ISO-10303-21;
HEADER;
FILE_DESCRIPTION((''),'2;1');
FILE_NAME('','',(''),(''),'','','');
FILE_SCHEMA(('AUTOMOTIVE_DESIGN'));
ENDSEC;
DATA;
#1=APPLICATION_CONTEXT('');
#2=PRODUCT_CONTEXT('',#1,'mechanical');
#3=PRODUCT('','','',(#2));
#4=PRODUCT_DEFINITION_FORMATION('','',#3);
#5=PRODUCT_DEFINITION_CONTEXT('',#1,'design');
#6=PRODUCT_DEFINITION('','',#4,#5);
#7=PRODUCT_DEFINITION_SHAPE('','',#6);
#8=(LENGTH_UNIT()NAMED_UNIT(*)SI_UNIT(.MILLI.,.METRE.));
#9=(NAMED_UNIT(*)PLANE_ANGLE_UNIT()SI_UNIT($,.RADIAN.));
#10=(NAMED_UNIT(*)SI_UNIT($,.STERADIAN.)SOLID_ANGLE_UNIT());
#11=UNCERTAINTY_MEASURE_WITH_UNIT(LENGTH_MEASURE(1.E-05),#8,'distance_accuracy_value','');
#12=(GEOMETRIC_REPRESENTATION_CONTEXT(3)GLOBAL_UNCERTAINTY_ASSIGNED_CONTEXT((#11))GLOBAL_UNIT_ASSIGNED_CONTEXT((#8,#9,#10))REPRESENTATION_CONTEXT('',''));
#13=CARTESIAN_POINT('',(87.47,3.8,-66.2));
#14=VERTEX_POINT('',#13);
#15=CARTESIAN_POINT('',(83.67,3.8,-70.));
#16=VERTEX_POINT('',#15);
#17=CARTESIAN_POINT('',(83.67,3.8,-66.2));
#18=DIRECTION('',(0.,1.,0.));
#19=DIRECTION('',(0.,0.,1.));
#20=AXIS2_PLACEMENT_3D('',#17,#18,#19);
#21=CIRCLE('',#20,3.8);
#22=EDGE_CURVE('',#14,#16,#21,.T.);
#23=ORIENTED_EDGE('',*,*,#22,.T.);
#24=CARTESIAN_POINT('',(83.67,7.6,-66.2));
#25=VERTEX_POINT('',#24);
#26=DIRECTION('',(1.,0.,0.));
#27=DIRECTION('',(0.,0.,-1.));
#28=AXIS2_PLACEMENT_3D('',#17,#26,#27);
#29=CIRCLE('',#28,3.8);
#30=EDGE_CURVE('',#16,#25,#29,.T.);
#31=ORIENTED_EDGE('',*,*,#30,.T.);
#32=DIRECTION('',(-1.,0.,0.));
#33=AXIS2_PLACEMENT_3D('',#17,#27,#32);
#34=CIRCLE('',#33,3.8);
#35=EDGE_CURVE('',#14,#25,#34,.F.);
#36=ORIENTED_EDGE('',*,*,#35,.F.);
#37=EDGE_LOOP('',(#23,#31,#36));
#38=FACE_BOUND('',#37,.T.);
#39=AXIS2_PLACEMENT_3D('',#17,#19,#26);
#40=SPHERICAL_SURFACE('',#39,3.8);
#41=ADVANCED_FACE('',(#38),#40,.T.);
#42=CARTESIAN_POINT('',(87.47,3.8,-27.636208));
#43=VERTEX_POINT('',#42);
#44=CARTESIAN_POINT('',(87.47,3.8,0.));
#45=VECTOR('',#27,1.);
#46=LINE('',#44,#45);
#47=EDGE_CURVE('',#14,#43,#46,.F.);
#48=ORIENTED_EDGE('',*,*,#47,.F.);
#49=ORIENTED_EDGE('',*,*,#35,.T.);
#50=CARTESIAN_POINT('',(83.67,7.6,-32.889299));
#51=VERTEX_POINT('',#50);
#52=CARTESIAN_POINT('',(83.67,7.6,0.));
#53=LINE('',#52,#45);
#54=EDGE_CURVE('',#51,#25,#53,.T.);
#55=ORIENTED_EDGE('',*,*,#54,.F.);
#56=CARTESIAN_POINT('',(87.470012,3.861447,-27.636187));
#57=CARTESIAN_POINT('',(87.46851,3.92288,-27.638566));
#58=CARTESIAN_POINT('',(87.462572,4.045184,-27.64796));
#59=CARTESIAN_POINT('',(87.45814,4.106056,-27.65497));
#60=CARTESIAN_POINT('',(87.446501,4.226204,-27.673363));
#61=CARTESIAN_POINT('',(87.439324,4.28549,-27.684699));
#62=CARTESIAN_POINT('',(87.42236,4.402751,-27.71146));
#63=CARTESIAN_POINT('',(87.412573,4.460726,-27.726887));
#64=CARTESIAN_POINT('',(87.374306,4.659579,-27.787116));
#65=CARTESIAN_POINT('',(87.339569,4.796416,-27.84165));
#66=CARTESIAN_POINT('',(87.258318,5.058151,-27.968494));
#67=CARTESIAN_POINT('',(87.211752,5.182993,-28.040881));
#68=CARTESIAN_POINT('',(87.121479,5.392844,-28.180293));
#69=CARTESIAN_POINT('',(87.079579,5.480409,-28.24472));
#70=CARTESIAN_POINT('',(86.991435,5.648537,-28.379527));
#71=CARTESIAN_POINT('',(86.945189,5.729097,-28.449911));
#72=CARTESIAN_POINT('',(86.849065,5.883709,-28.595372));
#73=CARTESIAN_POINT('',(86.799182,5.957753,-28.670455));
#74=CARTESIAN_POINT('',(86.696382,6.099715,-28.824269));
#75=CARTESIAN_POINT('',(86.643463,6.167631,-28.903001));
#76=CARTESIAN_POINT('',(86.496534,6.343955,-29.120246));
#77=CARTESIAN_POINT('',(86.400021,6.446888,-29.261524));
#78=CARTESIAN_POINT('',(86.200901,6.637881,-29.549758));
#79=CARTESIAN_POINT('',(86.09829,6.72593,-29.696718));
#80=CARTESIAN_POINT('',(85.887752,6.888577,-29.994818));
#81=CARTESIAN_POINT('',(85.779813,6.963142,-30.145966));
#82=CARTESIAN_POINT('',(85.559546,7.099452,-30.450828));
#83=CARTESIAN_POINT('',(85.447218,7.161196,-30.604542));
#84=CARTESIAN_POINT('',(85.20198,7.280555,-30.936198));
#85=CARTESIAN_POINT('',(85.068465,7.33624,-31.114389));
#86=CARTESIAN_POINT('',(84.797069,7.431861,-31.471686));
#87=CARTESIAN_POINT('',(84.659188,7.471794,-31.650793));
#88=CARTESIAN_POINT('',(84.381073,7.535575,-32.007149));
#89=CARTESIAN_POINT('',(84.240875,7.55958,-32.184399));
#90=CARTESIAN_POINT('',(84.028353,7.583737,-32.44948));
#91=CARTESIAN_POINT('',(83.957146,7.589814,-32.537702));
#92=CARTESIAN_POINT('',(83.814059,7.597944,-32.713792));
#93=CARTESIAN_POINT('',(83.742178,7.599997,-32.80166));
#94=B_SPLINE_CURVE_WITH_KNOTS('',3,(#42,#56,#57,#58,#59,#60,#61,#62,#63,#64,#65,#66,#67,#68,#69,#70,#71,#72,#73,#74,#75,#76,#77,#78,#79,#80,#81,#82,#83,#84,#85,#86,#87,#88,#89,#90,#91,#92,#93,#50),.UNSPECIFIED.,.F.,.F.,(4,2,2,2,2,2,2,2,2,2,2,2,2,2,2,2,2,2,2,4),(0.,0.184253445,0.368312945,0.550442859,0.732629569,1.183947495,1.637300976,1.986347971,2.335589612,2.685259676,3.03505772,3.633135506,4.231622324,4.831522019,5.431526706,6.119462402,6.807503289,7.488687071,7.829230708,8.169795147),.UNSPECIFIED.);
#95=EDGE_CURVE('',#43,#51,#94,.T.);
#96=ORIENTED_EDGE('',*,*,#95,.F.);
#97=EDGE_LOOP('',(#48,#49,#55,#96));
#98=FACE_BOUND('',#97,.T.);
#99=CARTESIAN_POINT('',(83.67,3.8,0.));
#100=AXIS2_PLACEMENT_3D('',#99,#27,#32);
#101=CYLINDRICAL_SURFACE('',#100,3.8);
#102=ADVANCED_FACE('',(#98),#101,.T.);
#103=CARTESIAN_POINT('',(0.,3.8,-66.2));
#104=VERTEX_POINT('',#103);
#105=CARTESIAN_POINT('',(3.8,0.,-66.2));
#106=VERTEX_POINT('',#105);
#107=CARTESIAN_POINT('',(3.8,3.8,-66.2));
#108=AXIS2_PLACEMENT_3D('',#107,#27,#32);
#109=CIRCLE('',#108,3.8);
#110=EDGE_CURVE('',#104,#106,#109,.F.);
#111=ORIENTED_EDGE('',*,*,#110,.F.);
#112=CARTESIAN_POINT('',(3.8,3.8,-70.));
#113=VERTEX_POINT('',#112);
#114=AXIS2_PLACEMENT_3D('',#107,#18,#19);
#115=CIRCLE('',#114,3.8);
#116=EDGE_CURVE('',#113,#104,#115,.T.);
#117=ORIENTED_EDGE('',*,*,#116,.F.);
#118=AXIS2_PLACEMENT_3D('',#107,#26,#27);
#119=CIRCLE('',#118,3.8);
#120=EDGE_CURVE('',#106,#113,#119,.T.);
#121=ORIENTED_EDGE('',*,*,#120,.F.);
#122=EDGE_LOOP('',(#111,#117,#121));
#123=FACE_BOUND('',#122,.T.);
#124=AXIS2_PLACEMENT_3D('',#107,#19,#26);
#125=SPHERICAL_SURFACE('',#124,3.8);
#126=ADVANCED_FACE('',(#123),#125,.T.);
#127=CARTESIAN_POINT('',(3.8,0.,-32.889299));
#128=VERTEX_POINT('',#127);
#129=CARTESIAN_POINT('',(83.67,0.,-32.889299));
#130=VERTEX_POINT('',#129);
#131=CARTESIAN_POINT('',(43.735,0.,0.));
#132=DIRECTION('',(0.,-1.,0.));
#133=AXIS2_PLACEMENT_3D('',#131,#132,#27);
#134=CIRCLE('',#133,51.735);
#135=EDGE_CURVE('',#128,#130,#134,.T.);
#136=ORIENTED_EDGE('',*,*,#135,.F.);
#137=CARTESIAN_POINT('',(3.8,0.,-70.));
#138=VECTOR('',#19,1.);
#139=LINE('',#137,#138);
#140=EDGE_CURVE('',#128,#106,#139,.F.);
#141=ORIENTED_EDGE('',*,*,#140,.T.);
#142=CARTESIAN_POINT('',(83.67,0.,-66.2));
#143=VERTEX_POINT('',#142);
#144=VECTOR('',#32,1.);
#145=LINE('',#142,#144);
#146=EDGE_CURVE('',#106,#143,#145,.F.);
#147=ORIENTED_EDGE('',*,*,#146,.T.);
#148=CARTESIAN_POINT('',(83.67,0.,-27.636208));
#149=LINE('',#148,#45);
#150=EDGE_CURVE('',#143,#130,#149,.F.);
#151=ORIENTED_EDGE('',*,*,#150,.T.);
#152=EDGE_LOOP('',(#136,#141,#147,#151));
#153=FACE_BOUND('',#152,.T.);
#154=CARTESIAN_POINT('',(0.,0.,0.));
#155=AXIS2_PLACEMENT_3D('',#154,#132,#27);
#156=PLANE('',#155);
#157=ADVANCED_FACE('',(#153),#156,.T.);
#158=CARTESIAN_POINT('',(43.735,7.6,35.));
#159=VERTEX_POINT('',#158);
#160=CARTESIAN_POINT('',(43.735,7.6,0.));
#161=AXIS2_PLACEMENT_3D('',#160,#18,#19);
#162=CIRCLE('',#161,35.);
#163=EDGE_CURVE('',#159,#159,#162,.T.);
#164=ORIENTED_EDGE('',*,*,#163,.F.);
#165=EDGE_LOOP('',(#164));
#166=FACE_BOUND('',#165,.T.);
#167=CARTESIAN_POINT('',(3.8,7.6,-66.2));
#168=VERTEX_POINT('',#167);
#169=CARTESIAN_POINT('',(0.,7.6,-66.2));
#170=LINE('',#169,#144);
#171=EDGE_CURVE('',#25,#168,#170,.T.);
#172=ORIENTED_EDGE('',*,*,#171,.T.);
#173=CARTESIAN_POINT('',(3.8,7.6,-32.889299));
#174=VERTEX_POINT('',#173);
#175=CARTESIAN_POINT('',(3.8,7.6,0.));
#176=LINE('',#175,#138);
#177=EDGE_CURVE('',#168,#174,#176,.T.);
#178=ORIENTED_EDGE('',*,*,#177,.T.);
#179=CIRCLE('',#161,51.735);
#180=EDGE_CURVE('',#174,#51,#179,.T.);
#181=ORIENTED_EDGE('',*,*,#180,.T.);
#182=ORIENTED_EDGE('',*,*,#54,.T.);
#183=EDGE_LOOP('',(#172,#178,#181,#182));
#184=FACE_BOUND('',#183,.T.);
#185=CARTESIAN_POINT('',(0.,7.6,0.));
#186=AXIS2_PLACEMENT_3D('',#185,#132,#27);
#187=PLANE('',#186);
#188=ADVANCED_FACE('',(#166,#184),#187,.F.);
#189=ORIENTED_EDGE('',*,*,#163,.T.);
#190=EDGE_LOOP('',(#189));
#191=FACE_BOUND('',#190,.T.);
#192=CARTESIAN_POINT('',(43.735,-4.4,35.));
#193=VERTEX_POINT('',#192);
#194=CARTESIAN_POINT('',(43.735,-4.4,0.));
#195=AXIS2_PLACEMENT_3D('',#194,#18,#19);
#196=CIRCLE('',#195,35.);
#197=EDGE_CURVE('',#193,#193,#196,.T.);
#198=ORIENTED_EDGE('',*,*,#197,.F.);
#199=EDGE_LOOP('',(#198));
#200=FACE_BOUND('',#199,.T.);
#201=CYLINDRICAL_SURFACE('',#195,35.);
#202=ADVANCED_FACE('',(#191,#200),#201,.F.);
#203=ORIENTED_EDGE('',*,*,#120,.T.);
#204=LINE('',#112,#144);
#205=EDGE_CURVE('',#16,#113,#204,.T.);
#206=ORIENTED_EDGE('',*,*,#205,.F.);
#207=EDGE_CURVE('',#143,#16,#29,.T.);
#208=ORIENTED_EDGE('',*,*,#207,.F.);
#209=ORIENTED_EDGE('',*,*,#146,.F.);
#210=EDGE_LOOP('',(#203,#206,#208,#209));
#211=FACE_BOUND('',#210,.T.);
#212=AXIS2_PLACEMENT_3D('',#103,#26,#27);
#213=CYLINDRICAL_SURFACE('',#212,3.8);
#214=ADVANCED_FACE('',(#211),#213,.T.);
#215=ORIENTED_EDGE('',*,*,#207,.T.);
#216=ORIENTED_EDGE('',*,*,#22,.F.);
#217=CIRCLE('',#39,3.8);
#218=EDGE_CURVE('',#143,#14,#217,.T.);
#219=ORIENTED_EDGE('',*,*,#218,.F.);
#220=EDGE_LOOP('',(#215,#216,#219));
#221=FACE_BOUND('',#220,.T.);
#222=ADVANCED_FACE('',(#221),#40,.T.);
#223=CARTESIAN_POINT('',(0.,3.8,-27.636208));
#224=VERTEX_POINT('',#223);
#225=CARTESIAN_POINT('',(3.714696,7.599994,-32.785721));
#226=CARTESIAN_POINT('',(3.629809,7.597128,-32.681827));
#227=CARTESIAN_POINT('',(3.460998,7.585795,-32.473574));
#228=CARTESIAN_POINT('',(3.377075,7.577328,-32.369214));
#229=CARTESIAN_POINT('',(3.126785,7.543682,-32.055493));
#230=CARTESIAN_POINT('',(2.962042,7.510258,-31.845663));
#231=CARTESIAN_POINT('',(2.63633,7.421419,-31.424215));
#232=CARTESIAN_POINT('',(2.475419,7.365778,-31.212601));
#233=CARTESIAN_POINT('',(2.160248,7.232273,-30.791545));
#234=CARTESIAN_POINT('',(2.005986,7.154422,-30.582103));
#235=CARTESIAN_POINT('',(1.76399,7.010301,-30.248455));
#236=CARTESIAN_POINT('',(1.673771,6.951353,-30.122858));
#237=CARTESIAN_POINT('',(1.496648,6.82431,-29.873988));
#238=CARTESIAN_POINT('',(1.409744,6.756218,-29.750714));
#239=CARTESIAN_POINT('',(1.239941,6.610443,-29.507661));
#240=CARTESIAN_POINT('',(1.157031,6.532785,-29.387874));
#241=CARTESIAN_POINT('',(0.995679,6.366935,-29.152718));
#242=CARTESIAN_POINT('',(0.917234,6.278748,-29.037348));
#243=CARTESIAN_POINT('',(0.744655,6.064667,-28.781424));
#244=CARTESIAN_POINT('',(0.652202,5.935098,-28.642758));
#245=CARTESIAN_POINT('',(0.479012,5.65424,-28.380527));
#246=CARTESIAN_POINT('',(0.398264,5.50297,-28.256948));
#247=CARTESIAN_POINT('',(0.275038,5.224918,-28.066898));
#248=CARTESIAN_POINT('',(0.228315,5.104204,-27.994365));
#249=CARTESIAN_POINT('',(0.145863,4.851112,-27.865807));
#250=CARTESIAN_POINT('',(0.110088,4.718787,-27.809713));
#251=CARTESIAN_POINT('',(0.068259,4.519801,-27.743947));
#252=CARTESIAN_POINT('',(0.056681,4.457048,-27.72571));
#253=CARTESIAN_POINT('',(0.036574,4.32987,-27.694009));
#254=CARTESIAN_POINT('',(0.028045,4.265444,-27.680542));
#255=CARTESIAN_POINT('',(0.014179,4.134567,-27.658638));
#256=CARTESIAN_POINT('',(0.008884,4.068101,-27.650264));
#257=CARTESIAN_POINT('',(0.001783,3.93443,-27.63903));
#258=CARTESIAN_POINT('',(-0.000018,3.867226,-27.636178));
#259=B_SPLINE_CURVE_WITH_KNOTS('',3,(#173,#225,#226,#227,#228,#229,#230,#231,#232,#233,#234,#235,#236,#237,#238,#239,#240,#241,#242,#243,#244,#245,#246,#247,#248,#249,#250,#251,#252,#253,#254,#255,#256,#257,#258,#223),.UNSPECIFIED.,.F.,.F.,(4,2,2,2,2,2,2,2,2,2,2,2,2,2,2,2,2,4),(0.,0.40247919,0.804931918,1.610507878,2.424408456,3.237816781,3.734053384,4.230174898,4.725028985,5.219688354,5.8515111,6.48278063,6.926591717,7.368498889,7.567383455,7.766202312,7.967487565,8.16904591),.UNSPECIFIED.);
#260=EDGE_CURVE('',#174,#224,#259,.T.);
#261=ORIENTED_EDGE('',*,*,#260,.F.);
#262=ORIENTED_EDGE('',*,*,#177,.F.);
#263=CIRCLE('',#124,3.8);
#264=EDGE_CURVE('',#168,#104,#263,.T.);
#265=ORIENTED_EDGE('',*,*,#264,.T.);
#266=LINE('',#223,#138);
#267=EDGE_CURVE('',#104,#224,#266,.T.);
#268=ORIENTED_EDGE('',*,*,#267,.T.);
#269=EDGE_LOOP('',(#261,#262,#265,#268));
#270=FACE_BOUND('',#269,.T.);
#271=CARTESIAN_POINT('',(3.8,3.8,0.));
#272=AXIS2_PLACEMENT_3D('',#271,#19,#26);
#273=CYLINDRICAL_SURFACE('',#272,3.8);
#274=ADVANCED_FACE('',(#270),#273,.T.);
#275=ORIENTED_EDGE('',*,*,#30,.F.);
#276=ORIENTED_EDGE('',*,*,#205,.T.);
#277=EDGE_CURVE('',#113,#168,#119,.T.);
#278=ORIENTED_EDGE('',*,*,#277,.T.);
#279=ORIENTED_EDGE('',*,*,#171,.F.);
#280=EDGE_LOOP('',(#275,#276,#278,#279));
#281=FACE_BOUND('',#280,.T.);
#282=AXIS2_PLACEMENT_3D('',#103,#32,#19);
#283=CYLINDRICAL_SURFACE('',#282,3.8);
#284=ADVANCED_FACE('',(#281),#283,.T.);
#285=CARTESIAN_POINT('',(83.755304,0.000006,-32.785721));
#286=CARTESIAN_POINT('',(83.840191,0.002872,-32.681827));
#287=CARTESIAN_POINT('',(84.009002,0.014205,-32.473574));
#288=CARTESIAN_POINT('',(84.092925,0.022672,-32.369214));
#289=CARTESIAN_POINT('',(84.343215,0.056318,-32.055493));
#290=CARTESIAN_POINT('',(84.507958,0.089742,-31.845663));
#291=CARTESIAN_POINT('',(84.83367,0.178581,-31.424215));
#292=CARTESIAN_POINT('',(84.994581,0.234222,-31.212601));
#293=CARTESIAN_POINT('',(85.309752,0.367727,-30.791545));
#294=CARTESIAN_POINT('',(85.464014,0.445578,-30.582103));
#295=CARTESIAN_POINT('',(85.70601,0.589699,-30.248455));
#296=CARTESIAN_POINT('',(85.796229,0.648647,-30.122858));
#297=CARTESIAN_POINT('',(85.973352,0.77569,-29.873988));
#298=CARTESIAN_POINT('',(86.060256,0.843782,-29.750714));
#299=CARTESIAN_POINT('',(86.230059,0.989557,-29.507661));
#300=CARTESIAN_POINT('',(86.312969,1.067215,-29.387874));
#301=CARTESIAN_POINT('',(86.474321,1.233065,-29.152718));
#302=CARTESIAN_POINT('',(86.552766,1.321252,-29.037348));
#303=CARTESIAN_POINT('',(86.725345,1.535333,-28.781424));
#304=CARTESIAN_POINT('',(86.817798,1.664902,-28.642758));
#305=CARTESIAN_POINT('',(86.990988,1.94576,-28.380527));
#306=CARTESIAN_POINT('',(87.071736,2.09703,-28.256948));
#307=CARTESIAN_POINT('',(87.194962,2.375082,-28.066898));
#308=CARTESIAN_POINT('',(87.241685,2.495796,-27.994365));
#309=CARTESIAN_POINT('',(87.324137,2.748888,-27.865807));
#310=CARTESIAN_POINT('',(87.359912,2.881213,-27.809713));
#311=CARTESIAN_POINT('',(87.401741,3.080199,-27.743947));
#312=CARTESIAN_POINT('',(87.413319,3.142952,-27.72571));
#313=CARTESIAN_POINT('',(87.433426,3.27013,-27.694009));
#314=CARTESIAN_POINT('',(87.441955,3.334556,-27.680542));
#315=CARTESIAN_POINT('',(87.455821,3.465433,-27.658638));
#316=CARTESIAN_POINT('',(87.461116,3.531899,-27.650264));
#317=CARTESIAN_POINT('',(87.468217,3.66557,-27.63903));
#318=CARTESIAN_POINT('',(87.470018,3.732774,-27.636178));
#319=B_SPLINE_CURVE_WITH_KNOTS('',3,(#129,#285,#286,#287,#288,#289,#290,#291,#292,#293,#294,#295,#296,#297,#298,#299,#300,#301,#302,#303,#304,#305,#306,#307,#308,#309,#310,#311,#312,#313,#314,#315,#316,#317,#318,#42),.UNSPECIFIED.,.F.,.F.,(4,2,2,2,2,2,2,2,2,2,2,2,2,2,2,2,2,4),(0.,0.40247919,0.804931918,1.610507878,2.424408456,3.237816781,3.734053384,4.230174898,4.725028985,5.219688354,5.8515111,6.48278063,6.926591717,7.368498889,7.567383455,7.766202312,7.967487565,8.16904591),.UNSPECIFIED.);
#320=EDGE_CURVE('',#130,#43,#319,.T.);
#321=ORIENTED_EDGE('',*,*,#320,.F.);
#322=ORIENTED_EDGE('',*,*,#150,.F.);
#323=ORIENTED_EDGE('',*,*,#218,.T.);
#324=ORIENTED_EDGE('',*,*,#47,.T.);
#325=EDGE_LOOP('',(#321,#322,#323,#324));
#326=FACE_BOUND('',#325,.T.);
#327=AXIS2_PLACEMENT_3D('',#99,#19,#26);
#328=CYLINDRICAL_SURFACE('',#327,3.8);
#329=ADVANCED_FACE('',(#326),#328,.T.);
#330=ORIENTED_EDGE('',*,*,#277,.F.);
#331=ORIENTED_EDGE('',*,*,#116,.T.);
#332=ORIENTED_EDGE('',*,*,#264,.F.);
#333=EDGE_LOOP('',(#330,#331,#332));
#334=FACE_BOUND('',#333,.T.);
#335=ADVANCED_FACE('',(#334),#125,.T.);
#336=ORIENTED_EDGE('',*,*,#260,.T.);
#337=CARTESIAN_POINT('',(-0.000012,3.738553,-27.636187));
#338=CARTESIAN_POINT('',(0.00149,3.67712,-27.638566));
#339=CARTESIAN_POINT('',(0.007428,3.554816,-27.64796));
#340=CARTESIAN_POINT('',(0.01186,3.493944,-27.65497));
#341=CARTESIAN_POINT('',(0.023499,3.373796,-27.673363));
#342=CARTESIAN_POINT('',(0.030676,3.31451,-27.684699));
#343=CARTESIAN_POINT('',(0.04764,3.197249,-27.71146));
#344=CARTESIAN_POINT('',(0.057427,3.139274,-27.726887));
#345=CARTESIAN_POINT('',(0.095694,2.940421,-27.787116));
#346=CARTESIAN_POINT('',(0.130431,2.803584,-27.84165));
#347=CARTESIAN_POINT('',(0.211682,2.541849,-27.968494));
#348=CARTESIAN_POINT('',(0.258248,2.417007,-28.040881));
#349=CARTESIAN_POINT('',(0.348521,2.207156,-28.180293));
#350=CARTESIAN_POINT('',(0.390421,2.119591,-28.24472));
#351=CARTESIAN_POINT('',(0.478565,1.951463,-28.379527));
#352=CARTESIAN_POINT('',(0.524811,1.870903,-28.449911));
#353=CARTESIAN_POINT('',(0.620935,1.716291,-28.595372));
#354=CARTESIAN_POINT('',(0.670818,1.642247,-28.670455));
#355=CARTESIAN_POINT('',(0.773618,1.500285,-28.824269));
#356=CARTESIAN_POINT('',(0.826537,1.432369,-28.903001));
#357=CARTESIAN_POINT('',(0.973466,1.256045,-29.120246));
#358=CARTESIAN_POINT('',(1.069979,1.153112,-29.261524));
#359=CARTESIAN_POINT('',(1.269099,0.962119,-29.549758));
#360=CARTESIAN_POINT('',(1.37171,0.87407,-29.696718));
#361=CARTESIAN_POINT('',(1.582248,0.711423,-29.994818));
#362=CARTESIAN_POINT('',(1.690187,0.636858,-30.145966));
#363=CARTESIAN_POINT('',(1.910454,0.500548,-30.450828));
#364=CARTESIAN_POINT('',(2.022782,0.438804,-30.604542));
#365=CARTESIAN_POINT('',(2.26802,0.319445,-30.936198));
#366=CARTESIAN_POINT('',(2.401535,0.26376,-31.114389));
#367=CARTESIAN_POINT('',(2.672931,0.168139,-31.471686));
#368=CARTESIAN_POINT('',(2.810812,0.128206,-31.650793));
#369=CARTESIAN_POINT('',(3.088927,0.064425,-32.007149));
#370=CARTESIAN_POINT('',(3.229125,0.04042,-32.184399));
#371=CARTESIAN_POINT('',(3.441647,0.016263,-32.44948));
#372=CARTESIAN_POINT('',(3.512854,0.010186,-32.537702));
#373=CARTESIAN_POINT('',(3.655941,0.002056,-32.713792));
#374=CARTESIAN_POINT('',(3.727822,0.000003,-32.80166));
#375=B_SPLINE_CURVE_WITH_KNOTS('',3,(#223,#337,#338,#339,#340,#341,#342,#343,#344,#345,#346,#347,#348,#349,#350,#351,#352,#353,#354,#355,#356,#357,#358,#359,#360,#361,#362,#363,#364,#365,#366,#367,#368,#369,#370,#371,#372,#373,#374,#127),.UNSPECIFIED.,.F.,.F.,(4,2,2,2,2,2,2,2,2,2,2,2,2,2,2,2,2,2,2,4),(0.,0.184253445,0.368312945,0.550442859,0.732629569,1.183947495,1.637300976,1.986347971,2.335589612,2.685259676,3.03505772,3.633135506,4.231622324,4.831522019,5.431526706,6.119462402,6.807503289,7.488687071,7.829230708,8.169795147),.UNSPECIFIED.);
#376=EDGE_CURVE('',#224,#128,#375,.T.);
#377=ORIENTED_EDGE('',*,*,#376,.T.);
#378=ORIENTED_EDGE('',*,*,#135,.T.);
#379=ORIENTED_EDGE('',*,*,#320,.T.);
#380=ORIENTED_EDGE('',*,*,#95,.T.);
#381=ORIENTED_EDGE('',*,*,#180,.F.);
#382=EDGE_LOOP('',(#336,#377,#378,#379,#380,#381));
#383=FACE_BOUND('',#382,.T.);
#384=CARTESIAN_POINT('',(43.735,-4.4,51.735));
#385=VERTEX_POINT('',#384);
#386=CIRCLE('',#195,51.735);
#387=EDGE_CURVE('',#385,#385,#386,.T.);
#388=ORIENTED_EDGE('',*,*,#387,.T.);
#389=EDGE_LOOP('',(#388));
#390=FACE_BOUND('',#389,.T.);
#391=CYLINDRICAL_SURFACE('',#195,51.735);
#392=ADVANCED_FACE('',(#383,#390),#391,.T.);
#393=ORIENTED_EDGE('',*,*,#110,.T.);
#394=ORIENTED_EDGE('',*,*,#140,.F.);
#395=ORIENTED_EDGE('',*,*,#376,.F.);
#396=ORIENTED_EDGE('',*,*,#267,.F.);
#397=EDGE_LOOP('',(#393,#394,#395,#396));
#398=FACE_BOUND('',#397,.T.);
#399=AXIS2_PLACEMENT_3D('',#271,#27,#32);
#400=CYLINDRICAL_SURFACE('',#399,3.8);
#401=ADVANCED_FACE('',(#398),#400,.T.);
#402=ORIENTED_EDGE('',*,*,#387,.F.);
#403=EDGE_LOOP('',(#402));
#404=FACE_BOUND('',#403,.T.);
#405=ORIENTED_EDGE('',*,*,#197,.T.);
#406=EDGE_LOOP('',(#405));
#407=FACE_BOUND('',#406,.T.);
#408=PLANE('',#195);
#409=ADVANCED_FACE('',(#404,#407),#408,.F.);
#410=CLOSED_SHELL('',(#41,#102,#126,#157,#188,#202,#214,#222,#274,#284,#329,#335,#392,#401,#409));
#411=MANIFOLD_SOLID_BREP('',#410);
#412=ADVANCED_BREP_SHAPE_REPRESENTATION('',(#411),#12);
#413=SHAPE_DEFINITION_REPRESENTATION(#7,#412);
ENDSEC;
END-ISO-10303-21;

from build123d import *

# Parameters (mm, degrees)
SKETCH1_W           = 87.47
SKETCH1_H           = 70
BOSS_EXTRUDE1_DEPTH = 7.6
SKETCH2_R           = 43.735
BOSS_EXTRUDE2_DEPTH = 12
SKETCH3_R           = 51.735
BOSS_EXTRUDE3_DEPTH = 12
SKETCH4_R           = 35
CUT_EXTRUDE1_DEPTH  = 12
FILLET1_R           = 3.8
FILLET2_R           = 3.8


with BuildPart() as part:
    # Sketch1 → Boss-Extrude1 (new body)
    with BuildSketch(Plane(origin=(0, 0, 0), x_dir=(1, 0, 0), z_dir=(0, 1, 0))):
        with Locations((43.735, 35)):
            Rectangle(SKETCH1_W, SKETCH1_H)
    extrude(amount=BOSS_EXTRUDE1_DEPTH)

    # Sketch2 → Boss-Extrude2 (add)
    with BuildSketch(Plane(origin=(0, 7.6, 0), x_dir=(1, 0, 0), z_dir=(0, 1, 0))):
        with Locations(Location((43.735, 0, 0), (0, 0, 270))):
            Circle(SKETCH2_R)
    extrude(amount=-BOSS_EXTRUDE2_DEPTH)

    # Sketch3 → Boss-Extrude3 (add)
    with BuildSketch(Plane(origin=(0, 7.6, 0), x_dir=(1, 0, 0), z_dir=(0, 1, 0))):
        with Locations(Location((43.735, 0, 0), (0, 0, 270))):
            Circle(SKETCH3_R)
    extrude(amount=-BOSS_EXTRUDE3_DEPTH)

    # Sketch4 → Cut-Extrude1 (cut)
    with BuildSketch(Plane(origin=(0, 7.6, 0), x_dir=(1, 0, 0), z_dir=(0, 1, 0))):
        with Locations(Location((43.735, 0, 0), (0, 0, 270))):
            Circle(SKETCH4_R)
    extrude(amount=-CUT_EXTRUDE1_DEPTH, mode=Mode.SUBTRACT)

    # Fillet1
    fillet1_edges = [part.edges().sort_by_distance(p)[0] for p in [
        (87.47, 0, -48.818104067),
        (87.47, 7.6, -48.818104067),
        (0, 7.6, -48.818104067),
        (0, 0, -48.818104067),
    ]]
    fillet(fillet1_edges, radius=FILLET1_R - 0.0001)  # a hair under: the kernel refuses the full size

    # Fillet2
    fillet2_edges = [part.edges().sort_by_distance(p)[0] for p in [
        (43.735, 7.6, -70),
        (43.735, 0, -70),
        (86.357035058, 6.487035058, -70),
        (86.357035058, 1.112964942, -70),
        (1.112964942, 1.112964942, -70),
        (1.112964942, 6.487035058, -70),
    ]]
    fillet(fillet2_edges, radius=FILLET2_R - 0.0001)  # a hair under: the kernel refuses the full size


solid = part.part
